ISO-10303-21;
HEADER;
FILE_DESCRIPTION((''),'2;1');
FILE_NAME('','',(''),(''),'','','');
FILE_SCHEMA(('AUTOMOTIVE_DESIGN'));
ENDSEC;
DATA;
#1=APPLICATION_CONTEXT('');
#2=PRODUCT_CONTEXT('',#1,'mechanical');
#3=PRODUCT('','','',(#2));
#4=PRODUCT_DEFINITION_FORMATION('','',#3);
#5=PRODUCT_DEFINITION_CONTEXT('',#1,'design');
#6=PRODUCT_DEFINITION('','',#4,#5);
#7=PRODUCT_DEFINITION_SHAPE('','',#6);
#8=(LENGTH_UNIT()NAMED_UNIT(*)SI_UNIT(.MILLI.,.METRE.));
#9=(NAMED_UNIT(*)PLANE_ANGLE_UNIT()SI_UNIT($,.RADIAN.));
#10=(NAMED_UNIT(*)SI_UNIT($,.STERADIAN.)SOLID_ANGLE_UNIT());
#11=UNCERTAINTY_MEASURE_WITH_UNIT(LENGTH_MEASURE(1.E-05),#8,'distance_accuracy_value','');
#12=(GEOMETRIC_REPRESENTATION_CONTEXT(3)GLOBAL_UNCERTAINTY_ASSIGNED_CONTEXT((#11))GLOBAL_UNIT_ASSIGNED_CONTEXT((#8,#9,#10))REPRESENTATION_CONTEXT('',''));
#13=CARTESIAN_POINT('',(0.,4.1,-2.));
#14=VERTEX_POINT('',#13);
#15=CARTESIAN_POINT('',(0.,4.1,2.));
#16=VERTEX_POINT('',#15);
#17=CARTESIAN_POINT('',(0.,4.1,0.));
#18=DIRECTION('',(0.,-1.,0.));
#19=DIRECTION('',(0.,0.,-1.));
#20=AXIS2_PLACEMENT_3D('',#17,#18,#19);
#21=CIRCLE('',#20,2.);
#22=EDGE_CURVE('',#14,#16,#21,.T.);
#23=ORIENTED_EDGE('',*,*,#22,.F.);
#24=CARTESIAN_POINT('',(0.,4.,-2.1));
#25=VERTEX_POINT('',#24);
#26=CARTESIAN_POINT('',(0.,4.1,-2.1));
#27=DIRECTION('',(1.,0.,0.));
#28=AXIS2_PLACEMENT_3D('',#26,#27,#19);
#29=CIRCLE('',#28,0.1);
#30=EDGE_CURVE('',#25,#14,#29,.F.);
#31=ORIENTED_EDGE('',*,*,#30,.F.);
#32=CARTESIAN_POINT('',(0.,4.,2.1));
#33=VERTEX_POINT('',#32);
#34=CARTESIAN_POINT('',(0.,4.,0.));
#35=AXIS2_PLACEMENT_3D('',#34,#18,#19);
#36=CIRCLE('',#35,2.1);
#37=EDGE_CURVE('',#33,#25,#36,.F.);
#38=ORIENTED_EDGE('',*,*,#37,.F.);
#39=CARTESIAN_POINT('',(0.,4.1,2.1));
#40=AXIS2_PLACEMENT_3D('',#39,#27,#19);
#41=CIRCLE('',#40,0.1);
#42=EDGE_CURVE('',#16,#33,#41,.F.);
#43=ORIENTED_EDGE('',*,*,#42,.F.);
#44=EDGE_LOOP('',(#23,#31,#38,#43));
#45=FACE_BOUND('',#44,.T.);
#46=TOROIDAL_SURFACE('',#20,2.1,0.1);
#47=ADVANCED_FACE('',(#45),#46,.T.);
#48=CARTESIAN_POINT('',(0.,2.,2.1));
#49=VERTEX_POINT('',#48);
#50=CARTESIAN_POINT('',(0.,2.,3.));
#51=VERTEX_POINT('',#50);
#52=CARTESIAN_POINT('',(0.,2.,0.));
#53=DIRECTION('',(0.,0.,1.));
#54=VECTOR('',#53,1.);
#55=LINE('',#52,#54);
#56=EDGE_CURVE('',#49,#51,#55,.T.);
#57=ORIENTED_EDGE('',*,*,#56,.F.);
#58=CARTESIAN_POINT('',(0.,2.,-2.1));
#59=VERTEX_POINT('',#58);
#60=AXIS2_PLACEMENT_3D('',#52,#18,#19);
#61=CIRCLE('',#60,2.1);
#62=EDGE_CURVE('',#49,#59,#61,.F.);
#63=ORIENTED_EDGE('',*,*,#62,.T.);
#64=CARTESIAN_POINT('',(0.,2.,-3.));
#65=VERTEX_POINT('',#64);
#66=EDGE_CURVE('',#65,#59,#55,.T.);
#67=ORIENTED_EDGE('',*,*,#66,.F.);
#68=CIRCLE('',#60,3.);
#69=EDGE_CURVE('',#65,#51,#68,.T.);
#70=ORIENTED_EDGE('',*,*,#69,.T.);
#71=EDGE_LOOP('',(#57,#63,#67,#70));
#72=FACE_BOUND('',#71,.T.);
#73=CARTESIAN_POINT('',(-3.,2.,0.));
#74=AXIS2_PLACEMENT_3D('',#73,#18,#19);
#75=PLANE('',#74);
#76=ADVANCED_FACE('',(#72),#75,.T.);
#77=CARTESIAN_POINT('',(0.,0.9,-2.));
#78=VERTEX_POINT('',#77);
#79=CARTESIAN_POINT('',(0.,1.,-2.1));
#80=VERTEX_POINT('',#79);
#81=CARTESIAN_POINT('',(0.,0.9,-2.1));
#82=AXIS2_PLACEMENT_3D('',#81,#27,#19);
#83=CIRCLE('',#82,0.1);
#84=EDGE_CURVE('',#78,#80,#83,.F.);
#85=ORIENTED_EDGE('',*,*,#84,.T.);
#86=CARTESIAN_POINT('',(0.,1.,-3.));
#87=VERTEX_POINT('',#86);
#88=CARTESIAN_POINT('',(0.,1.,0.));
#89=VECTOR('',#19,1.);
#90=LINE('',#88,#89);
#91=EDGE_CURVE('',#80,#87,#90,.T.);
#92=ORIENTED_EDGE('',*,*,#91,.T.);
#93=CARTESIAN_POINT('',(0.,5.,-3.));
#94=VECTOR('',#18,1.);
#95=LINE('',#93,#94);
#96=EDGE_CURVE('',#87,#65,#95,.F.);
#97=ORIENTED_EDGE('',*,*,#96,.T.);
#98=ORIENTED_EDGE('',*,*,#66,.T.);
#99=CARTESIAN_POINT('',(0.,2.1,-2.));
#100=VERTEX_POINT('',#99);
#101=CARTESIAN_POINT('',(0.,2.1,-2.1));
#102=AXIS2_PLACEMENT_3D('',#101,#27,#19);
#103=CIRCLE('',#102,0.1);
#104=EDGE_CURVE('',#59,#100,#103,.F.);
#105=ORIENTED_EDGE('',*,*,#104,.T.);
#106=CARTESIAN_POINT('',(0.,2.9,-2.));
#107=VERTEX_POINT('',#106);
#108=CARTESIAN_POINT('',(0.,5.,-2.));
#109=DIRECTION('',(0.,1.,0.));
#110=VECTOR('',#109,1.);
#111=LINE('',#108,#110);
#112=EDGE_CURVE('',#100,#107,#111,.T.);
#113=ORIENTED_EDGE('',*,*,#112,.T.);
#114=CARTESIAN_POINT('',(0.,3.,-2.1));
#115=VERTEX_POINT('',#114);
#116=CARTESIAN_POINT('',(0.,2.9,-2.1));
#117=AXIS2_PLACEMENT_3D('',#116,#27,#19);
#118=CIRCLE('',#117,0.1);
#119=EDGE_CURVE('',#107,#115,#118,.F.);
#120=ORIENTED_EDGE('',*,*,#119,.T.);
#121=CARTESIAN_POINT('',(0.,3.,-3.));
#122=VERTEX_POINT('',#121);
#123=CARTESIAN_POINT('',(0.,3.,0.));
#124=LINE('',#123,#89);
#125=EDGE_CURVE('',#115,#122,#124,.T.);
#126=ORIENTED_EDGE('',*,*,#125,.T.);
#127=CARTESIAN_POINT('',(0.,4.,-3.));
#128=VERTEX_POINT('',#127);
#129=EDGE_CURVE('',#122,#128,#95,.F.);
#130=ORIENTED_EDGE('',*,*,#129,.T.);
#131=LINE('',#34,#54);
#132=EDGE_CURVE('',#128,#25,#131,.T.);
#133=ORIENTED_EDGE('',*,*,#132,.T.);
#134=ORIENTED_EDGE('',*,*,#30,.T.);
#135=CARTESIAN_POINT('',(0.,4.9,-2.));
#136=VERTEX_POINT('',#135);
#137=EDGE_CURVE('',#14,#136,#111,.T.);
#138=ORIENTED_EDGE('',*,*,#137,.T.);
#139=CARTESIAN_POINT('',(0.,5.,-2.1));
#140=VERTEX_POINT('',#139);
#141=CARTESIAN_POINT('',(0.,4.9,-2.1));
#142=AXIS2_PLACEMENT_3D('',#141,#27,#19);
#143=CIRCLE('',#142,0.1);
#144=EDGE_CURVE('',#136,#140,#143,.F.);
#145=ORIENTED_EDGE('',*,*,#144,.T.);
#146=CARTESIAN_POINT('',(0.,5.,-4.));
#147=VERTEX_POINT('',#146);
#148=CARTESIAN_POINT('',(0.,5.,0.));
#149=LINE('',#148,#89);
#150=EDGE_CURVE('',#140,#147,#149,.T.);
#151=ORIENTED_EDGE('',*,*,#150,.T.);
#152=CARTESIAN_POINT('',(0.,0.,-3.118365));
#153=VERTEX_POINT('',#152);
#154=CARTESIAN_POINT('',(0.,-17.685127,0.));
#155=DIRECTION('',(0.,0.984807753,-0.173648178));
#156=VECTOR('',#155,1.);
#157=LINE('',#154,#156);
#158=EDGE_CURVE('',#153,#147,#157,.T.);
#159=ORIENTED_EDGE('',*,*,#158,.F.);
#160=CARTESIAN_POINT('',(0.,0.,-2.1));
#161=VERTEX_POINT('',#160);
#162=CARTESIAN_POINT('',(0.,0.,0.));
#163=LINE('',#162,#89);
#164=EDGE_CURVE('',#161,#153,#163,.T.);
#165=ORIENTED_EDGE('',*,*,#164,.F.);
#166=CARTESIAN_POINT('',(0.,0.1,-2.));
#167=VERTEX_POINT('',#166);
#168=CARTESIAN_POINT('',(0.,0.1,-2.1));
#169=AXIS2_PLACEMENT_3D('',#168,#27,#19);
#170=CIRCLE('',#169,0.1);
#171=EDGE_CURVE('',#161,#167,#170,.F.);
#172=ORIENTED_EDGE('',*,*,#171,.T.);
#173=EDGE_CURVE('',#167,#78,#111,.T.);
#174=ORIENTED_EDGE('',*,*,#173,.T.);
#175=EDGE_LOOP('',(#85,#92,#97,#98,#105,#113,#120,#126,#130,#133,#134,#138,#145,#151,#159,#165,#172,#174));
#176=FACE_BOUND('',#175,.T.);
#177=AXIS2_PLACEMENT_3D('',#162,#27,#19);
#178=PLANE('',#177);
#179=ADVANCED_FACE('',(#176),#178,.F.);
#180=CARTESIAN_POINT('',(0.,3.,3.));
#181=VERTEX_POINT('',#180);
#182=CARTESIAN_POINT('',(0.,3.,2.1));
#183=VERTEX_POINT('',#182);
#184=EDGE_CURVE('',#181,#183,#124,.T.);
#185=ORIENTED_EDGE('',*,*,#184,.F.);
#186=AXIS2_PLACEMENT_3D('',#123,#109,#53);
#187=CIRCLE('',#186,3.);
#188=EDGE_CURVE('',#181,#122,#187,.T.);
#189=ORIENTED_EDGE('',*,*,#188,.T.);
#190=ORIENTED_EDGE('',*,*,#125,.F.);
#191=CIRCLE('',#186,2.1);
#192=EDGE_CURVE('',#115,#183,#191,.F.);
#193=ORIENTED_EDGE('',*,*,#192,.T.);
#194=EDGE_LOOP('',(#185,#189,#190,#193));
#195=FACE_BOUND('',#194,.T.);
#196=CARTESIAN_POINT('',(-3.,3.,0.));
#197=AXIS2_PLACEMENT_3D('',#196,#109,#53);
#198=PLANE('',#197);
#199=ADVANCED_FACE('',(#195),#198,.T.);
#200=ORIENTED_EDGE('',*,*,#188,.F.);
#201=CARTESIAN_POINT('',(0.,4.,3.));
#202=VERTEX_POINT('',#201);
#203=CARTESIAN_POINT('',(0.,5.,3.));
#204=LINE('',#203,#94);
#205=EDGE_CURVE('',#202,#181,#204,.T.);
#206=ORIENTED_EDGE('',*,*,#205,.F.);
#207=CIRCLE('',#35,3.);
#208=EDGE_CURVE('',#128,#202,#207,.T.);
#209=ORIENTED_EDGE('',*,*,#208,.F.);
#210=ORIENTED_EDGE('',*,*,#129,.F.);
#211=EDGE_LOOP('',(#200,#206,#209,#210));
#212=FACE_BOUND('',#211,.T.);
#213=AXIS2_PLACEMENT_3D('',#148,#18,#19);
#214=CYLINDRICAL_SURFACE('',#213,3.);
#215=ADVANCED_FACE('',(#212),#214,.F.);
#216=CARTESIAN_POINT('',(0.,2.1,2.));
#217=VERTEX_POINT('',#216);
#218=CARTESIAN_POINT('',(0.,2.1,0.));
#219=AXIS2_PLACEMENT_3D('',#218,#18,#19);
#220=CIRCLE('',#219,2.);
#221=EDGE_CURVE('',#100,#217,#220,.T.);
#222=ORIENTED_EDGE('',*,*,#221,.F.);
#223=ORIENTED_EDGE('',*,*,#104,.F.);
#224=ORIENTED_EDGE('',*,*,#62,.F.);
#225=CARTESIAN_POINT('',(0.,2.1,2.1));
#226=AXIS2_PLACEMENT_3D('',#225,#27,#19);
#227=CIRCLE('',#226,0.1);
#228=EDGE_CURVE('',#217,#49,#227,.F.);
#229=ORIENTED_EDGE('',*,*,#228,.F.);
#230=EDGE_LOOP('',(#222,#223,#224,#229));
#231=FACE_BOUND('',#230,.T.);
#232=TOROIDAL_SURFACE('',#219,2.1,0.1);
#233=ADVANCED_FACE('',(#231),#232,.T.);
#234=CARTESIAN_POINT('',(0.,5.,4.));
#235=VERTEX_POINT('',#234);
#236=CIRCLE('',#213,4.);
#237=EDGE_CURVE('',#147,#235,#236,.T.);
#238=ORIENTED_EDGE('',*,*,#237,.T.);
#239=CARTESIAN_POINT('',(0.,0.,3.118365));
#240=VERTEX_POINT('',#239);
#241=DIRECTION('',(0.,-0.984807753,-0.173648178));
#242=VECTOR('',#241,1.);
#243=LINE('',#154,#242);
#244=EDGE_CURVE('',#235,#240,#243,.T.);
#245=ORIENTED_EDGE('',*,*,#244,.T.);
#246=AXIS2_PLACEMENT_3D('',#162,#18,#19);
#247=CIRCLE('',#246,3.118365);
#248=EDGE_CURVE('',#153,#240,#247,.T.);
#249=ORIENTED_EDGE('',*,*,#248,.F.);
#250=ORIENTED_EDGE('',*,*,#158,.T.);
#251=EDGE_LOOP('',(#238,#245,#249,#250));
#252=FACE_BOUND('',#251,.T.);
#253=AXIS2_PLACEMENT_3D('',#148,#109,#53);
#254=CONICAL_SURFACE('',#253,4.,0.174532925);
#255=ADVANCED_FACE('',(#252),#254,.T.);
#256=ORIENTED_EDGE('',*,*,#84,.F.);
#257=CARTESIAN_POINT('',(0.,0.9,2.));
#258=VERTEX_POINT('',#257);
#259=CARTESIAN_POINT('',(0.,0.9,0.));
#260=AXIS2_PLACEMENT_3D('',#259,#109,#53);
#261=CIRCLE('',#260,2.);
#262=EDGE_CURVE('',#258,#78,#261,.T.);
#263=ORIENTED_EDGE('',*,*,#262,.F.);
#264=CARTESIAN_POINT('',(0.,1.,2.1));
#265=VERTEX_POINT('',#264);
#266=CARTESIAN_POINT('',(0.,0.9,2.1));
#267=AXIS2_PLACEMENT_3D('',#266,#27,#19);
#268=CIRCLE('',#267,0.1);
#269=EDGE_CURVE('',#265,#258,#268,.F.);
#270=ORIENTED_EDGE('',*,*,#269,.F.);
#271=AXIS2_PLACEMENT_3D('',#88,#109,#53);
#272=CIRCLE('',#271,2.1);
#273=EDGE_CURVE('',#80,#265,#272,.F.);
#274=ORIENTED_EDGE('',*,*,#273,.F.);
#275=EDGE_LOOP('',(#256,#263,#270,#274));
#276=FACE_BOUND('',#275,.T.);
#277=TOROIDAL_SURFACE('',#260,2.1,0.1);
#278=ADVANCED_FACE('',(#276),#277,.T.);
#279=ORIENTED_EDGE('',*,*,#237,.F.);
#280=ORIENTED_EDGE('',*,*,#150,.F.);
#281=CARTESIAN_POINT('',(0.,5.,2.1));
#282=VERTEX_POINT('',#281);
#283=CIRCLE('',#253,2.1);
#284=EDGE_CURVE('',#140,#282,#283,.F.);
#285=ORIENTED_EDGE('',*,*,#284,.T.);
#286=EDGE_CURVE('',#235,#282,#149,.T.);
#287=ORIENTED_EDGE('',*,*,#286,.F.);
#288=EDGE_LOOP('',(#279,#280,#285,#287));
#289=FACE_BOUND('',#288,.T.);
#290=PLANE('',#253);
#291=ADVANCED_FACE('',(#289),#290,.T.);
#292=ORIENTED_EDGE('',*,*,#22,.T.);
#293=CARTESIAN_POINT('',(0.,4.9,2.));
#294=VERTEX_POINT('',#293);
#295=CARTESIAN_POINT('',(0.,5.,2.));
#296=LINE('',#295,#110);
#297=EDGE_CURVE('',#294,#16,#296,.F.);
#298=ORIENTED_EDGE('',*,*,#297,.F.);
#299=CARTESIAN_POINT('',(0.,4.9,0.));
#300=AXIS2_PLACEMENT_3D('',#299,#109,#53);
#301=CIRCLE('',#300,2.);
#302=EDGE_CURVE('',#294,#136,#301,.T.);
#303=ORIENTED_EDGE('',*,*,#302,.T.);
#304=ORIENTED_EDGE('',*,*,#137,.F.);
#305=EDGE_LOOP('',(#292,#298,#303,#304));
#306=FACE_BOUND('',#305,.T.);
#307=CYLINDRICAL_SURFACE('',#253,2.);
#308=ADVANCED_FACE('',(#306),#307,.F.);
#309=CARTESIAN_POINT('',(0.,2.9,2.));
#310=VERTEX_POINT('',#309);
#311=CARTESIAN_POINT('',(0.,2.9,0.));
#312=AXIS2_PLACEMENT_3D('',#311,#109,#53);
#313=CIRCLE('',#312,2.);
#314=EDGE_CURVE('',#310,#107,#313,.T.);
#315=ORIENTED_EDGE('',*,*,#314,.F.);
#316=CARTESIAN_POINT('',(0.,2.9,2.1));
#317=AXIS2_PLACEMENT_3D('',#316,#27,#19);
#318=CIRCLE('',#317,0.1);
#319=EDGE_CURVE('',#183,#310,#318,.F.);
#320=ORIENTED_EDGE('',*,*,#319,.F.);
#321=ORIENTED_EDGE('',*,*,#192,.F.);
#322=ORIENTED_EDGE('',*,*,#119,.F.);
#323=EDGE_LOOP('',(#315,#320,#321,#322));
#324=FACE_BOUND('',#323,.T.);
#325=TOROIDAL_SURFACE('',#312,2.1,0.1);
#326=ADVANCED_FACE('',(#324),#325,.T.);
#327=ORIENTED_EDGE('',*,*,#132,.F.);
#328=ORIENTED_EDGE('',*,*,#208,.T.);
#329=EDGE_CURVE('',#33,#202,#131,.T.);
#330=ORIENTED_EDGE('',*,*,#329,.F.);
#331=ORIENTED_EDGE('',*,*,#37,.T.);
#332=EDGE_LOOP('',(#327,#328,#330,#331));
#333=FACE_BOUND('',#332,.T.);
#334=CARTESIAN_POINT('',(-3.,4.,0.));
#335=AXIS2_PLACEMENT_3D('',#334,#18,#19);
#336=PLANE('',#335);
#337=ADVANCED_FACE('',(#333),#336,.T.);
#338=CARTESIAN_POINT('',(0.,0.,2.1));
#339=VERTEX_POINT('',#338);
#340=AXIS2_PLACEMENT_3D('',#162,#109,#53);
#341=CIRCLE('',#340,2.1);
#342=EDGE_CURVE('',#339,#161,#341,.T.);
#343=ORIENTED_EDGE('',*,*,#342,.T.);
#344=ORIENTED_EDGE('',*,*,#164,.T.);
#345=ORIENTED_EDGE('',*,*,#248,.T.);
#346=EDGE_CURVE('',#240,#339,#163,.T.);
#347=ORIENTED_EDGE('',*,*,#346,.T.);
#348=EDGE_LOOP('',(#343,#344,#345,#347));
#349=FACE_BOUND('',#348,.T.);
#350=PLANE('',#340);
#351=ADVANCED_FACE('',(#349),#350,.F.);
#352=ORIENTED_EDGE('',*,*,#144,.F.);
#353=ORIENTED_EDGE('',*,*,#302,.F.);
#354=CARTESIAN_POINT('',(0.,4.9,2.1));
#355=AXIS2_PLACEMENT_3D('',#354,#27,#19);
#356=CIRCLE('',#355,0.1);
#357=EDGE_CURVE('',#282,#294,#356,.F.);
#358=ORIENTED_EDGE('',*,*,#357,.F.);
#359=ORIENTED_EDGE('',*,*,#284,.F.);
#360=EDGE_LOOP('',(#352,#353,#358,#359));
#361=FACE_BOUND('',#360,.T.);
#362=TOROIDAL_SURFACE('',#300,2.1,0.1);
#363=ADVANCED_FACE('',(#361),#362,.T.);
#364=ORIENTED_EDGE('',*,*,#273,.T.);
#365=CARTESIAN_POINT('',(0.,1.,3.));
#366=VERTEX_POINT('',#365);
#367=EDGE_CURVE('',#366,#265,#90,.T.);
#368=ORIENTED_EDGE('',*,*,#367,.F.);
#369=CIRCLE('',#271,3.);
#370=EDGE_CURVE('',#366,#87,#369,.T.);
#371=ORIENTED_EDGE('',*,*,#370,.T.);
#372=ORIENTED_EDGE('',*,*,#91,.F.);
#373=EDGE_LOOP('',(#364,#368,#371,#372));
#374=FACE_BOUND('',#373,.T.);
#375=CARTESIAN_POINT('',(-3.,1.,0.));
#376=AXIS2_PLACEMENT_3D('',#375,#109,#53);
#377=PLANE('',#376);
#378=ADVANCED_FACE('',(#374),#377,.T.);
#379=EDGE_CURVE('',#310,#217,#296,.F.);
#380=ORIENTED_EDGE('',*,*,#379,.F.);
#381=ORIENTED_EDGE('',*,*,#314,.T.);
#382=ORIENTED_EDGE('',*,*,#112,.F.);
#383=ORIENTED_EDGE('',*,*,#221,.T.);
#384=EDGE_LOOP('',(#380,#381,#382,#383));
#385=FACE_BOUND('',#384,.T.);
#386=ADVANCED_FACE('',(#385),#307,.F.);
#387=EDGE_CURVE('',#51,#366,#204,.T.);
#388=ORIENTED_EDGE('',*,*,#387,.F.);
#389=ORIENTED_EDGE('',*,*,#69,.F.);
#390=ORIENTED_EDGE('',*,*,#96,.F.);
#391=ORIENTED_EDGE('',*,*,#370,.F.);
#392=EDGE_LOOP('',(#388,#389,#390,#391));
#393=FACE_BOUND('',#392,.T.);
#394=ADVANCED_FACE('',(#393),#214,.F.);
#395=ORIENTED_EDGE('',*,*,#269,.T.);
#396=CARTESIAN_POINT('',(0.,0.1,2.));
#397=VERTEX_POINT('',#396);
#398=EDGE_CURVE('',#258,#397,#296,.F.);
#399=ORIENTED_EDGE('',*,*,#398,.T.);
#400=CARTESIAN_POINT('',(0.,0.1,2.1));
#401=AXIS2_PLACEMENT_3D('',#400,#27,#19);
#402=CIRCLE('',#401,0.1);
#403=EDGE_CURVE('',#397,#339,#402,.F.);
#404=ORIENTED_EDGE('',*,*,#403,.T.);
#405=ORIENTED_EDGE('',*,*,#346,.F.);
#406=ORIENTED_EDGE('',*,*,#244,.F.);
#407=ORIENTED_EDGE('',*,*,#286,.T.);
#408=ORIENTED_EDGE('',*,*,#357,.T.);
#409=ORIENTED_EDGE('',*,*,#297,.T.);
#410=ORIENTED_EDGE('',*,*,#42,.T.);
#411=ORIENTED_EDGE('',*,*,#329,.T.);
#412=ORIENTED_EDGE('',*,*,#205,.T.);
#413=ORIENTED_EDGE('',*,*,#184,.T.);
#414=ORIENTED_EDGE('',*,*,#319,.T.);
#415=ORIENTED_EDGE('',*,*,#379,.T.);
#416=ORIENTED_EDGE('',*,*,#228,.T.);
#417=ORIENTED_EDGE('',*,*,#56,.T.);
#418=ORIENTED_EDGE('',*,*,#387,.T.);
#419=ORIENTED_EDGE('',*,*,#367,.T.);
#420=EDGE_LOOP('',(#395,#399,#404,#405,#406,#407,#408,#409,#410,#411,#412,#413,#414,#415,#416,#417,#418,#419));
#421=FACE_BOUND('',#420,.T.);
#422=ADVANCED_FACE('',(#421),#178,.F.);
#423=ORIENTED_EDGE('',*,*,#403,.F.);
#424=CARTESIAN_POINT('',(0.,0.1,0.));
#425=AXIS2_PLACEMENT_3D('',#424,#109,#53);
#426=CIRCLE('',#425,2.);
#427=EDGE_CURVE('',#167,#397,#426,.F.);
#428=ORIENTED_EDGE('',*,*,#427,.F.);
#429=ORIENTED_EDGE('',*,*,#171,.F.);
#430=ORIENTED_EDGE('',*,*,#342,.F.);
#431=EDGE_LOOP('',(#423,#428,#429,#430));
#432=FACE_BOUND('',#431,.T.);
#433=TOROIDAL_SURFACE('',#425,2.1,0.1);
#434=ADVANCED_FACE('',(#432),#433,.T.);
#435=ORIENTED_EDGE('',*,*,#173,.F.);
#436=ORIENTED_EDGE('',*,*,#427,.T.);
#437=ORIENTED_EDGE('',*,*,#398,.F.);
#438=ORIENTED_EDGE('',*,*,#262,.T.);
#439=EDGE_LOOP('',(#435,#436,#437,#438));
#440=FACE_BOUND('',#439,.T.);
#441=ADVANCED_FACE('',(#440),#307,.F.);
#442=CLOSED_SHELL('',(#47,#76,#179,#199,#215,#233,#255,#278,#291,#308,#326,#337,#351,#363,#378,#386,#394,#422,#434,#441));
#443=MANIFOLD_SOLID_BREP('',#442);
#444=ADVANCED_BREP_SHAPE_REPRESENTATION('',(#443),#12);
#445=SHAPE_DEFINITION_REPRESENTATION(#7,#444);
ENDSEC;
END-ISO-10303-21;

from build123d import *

# Parameters (mm, degrees)
SKETCH1_R           = 4
SKETCH1_R_2         = 3
BOSS_EXTRUDE1_DEPTH = 5
SKETCH2_W           = 1
SKETCH2_H           = 1
FILLET1_R           = 0.1


# Read off the part's stored shape, not the designer's step: Cut-Revolve-Thin1, Body-Delete/Keep 1
with BuildPart() as part:
    # Sketch1 → Boss-Extrude1 (new body)
    with BuildSketch(Plane(origin=(0, 0, 0), x_dir=(1, 0, 0), z_dir=(0, 1, 0))):
        with Locations(Location((0, 0, 0), (0, 0, 270))):
            Circle(SKETCH1_R)
        with Locations(Location((0, 0, 0), (0, 0, 270))):
            Circle(SKETCH1_R_2, mode=Mode.SUBTRACT)
    extrude(amount=BOSS_EXTRUDE1_DEPTH)

    # Sketch2 → Revolve1 (revolve)
    with BuildSketch(Plane.XY, mode=Mode.PRIVATE) as revolve1_sk:
        with Locations((-2.5, 4.5)):
            Rectangle(SKETCH2_W, SKETCH2_H)
        with Locations((-2.5, 2.5)):
            Rectangle(SKETCH2_W, SKETCH2_H)
        with Locations((-2.5, 0.5)):
            Rectangle(SKETCH2_W, SKETCH2_H)
    revolve(revolve1_sk.sketch.rotate(Axis((0, 5, 0), (0, -1, 0)), 270), axis=Axis((0, 5, 0), (0, -1, 0)))

    # Cut-Revolve-Thin1 outline → Cut-Revolve-Thin1 (revolve, cut)
    with BuildSketch(Plane.XY):
        Polygon((3.118365096, 0), (3.219907758, 0), (4, 4.424122952), (4, 5), align=None)
    revolve(axis=Axis((0, 0, 0), (0, 1, 0)), mode=Mode.SUBTRACT)

    # Body-Delete/Keep 1 outline → Body-Delete/Keep 1 (revolve, cut)
    with BuildSketch(Plane.XY):
        Polygon((4, 4.424122952), (3.219907758, 0), (4, 0), align=None)
    revolve(axis=Axis((0, 0, 0), (0, 1, 0)), mode=Mode.SUBTRACT)

    # SurfaceCut1
    split(bisect_by=Plane(origin=(0, 0, 0), x_dir=(0, 0, -1), z_dir=(1, 0, 0)), keep=Keep.TOP)

    # Fillet1
    fillet1_edges = [part.edges().sort_by_distance(p)[0] for p in [
        (2, 0, 0),
        (2, 1, 0),
        (2, 4, 0),
        (2, 5, 0),
        (2, 3, 0),
        (2, 2, 0),
    ]]
    fillet(fillet1_edges, radius=FILLET1_R)


solid = part.part
